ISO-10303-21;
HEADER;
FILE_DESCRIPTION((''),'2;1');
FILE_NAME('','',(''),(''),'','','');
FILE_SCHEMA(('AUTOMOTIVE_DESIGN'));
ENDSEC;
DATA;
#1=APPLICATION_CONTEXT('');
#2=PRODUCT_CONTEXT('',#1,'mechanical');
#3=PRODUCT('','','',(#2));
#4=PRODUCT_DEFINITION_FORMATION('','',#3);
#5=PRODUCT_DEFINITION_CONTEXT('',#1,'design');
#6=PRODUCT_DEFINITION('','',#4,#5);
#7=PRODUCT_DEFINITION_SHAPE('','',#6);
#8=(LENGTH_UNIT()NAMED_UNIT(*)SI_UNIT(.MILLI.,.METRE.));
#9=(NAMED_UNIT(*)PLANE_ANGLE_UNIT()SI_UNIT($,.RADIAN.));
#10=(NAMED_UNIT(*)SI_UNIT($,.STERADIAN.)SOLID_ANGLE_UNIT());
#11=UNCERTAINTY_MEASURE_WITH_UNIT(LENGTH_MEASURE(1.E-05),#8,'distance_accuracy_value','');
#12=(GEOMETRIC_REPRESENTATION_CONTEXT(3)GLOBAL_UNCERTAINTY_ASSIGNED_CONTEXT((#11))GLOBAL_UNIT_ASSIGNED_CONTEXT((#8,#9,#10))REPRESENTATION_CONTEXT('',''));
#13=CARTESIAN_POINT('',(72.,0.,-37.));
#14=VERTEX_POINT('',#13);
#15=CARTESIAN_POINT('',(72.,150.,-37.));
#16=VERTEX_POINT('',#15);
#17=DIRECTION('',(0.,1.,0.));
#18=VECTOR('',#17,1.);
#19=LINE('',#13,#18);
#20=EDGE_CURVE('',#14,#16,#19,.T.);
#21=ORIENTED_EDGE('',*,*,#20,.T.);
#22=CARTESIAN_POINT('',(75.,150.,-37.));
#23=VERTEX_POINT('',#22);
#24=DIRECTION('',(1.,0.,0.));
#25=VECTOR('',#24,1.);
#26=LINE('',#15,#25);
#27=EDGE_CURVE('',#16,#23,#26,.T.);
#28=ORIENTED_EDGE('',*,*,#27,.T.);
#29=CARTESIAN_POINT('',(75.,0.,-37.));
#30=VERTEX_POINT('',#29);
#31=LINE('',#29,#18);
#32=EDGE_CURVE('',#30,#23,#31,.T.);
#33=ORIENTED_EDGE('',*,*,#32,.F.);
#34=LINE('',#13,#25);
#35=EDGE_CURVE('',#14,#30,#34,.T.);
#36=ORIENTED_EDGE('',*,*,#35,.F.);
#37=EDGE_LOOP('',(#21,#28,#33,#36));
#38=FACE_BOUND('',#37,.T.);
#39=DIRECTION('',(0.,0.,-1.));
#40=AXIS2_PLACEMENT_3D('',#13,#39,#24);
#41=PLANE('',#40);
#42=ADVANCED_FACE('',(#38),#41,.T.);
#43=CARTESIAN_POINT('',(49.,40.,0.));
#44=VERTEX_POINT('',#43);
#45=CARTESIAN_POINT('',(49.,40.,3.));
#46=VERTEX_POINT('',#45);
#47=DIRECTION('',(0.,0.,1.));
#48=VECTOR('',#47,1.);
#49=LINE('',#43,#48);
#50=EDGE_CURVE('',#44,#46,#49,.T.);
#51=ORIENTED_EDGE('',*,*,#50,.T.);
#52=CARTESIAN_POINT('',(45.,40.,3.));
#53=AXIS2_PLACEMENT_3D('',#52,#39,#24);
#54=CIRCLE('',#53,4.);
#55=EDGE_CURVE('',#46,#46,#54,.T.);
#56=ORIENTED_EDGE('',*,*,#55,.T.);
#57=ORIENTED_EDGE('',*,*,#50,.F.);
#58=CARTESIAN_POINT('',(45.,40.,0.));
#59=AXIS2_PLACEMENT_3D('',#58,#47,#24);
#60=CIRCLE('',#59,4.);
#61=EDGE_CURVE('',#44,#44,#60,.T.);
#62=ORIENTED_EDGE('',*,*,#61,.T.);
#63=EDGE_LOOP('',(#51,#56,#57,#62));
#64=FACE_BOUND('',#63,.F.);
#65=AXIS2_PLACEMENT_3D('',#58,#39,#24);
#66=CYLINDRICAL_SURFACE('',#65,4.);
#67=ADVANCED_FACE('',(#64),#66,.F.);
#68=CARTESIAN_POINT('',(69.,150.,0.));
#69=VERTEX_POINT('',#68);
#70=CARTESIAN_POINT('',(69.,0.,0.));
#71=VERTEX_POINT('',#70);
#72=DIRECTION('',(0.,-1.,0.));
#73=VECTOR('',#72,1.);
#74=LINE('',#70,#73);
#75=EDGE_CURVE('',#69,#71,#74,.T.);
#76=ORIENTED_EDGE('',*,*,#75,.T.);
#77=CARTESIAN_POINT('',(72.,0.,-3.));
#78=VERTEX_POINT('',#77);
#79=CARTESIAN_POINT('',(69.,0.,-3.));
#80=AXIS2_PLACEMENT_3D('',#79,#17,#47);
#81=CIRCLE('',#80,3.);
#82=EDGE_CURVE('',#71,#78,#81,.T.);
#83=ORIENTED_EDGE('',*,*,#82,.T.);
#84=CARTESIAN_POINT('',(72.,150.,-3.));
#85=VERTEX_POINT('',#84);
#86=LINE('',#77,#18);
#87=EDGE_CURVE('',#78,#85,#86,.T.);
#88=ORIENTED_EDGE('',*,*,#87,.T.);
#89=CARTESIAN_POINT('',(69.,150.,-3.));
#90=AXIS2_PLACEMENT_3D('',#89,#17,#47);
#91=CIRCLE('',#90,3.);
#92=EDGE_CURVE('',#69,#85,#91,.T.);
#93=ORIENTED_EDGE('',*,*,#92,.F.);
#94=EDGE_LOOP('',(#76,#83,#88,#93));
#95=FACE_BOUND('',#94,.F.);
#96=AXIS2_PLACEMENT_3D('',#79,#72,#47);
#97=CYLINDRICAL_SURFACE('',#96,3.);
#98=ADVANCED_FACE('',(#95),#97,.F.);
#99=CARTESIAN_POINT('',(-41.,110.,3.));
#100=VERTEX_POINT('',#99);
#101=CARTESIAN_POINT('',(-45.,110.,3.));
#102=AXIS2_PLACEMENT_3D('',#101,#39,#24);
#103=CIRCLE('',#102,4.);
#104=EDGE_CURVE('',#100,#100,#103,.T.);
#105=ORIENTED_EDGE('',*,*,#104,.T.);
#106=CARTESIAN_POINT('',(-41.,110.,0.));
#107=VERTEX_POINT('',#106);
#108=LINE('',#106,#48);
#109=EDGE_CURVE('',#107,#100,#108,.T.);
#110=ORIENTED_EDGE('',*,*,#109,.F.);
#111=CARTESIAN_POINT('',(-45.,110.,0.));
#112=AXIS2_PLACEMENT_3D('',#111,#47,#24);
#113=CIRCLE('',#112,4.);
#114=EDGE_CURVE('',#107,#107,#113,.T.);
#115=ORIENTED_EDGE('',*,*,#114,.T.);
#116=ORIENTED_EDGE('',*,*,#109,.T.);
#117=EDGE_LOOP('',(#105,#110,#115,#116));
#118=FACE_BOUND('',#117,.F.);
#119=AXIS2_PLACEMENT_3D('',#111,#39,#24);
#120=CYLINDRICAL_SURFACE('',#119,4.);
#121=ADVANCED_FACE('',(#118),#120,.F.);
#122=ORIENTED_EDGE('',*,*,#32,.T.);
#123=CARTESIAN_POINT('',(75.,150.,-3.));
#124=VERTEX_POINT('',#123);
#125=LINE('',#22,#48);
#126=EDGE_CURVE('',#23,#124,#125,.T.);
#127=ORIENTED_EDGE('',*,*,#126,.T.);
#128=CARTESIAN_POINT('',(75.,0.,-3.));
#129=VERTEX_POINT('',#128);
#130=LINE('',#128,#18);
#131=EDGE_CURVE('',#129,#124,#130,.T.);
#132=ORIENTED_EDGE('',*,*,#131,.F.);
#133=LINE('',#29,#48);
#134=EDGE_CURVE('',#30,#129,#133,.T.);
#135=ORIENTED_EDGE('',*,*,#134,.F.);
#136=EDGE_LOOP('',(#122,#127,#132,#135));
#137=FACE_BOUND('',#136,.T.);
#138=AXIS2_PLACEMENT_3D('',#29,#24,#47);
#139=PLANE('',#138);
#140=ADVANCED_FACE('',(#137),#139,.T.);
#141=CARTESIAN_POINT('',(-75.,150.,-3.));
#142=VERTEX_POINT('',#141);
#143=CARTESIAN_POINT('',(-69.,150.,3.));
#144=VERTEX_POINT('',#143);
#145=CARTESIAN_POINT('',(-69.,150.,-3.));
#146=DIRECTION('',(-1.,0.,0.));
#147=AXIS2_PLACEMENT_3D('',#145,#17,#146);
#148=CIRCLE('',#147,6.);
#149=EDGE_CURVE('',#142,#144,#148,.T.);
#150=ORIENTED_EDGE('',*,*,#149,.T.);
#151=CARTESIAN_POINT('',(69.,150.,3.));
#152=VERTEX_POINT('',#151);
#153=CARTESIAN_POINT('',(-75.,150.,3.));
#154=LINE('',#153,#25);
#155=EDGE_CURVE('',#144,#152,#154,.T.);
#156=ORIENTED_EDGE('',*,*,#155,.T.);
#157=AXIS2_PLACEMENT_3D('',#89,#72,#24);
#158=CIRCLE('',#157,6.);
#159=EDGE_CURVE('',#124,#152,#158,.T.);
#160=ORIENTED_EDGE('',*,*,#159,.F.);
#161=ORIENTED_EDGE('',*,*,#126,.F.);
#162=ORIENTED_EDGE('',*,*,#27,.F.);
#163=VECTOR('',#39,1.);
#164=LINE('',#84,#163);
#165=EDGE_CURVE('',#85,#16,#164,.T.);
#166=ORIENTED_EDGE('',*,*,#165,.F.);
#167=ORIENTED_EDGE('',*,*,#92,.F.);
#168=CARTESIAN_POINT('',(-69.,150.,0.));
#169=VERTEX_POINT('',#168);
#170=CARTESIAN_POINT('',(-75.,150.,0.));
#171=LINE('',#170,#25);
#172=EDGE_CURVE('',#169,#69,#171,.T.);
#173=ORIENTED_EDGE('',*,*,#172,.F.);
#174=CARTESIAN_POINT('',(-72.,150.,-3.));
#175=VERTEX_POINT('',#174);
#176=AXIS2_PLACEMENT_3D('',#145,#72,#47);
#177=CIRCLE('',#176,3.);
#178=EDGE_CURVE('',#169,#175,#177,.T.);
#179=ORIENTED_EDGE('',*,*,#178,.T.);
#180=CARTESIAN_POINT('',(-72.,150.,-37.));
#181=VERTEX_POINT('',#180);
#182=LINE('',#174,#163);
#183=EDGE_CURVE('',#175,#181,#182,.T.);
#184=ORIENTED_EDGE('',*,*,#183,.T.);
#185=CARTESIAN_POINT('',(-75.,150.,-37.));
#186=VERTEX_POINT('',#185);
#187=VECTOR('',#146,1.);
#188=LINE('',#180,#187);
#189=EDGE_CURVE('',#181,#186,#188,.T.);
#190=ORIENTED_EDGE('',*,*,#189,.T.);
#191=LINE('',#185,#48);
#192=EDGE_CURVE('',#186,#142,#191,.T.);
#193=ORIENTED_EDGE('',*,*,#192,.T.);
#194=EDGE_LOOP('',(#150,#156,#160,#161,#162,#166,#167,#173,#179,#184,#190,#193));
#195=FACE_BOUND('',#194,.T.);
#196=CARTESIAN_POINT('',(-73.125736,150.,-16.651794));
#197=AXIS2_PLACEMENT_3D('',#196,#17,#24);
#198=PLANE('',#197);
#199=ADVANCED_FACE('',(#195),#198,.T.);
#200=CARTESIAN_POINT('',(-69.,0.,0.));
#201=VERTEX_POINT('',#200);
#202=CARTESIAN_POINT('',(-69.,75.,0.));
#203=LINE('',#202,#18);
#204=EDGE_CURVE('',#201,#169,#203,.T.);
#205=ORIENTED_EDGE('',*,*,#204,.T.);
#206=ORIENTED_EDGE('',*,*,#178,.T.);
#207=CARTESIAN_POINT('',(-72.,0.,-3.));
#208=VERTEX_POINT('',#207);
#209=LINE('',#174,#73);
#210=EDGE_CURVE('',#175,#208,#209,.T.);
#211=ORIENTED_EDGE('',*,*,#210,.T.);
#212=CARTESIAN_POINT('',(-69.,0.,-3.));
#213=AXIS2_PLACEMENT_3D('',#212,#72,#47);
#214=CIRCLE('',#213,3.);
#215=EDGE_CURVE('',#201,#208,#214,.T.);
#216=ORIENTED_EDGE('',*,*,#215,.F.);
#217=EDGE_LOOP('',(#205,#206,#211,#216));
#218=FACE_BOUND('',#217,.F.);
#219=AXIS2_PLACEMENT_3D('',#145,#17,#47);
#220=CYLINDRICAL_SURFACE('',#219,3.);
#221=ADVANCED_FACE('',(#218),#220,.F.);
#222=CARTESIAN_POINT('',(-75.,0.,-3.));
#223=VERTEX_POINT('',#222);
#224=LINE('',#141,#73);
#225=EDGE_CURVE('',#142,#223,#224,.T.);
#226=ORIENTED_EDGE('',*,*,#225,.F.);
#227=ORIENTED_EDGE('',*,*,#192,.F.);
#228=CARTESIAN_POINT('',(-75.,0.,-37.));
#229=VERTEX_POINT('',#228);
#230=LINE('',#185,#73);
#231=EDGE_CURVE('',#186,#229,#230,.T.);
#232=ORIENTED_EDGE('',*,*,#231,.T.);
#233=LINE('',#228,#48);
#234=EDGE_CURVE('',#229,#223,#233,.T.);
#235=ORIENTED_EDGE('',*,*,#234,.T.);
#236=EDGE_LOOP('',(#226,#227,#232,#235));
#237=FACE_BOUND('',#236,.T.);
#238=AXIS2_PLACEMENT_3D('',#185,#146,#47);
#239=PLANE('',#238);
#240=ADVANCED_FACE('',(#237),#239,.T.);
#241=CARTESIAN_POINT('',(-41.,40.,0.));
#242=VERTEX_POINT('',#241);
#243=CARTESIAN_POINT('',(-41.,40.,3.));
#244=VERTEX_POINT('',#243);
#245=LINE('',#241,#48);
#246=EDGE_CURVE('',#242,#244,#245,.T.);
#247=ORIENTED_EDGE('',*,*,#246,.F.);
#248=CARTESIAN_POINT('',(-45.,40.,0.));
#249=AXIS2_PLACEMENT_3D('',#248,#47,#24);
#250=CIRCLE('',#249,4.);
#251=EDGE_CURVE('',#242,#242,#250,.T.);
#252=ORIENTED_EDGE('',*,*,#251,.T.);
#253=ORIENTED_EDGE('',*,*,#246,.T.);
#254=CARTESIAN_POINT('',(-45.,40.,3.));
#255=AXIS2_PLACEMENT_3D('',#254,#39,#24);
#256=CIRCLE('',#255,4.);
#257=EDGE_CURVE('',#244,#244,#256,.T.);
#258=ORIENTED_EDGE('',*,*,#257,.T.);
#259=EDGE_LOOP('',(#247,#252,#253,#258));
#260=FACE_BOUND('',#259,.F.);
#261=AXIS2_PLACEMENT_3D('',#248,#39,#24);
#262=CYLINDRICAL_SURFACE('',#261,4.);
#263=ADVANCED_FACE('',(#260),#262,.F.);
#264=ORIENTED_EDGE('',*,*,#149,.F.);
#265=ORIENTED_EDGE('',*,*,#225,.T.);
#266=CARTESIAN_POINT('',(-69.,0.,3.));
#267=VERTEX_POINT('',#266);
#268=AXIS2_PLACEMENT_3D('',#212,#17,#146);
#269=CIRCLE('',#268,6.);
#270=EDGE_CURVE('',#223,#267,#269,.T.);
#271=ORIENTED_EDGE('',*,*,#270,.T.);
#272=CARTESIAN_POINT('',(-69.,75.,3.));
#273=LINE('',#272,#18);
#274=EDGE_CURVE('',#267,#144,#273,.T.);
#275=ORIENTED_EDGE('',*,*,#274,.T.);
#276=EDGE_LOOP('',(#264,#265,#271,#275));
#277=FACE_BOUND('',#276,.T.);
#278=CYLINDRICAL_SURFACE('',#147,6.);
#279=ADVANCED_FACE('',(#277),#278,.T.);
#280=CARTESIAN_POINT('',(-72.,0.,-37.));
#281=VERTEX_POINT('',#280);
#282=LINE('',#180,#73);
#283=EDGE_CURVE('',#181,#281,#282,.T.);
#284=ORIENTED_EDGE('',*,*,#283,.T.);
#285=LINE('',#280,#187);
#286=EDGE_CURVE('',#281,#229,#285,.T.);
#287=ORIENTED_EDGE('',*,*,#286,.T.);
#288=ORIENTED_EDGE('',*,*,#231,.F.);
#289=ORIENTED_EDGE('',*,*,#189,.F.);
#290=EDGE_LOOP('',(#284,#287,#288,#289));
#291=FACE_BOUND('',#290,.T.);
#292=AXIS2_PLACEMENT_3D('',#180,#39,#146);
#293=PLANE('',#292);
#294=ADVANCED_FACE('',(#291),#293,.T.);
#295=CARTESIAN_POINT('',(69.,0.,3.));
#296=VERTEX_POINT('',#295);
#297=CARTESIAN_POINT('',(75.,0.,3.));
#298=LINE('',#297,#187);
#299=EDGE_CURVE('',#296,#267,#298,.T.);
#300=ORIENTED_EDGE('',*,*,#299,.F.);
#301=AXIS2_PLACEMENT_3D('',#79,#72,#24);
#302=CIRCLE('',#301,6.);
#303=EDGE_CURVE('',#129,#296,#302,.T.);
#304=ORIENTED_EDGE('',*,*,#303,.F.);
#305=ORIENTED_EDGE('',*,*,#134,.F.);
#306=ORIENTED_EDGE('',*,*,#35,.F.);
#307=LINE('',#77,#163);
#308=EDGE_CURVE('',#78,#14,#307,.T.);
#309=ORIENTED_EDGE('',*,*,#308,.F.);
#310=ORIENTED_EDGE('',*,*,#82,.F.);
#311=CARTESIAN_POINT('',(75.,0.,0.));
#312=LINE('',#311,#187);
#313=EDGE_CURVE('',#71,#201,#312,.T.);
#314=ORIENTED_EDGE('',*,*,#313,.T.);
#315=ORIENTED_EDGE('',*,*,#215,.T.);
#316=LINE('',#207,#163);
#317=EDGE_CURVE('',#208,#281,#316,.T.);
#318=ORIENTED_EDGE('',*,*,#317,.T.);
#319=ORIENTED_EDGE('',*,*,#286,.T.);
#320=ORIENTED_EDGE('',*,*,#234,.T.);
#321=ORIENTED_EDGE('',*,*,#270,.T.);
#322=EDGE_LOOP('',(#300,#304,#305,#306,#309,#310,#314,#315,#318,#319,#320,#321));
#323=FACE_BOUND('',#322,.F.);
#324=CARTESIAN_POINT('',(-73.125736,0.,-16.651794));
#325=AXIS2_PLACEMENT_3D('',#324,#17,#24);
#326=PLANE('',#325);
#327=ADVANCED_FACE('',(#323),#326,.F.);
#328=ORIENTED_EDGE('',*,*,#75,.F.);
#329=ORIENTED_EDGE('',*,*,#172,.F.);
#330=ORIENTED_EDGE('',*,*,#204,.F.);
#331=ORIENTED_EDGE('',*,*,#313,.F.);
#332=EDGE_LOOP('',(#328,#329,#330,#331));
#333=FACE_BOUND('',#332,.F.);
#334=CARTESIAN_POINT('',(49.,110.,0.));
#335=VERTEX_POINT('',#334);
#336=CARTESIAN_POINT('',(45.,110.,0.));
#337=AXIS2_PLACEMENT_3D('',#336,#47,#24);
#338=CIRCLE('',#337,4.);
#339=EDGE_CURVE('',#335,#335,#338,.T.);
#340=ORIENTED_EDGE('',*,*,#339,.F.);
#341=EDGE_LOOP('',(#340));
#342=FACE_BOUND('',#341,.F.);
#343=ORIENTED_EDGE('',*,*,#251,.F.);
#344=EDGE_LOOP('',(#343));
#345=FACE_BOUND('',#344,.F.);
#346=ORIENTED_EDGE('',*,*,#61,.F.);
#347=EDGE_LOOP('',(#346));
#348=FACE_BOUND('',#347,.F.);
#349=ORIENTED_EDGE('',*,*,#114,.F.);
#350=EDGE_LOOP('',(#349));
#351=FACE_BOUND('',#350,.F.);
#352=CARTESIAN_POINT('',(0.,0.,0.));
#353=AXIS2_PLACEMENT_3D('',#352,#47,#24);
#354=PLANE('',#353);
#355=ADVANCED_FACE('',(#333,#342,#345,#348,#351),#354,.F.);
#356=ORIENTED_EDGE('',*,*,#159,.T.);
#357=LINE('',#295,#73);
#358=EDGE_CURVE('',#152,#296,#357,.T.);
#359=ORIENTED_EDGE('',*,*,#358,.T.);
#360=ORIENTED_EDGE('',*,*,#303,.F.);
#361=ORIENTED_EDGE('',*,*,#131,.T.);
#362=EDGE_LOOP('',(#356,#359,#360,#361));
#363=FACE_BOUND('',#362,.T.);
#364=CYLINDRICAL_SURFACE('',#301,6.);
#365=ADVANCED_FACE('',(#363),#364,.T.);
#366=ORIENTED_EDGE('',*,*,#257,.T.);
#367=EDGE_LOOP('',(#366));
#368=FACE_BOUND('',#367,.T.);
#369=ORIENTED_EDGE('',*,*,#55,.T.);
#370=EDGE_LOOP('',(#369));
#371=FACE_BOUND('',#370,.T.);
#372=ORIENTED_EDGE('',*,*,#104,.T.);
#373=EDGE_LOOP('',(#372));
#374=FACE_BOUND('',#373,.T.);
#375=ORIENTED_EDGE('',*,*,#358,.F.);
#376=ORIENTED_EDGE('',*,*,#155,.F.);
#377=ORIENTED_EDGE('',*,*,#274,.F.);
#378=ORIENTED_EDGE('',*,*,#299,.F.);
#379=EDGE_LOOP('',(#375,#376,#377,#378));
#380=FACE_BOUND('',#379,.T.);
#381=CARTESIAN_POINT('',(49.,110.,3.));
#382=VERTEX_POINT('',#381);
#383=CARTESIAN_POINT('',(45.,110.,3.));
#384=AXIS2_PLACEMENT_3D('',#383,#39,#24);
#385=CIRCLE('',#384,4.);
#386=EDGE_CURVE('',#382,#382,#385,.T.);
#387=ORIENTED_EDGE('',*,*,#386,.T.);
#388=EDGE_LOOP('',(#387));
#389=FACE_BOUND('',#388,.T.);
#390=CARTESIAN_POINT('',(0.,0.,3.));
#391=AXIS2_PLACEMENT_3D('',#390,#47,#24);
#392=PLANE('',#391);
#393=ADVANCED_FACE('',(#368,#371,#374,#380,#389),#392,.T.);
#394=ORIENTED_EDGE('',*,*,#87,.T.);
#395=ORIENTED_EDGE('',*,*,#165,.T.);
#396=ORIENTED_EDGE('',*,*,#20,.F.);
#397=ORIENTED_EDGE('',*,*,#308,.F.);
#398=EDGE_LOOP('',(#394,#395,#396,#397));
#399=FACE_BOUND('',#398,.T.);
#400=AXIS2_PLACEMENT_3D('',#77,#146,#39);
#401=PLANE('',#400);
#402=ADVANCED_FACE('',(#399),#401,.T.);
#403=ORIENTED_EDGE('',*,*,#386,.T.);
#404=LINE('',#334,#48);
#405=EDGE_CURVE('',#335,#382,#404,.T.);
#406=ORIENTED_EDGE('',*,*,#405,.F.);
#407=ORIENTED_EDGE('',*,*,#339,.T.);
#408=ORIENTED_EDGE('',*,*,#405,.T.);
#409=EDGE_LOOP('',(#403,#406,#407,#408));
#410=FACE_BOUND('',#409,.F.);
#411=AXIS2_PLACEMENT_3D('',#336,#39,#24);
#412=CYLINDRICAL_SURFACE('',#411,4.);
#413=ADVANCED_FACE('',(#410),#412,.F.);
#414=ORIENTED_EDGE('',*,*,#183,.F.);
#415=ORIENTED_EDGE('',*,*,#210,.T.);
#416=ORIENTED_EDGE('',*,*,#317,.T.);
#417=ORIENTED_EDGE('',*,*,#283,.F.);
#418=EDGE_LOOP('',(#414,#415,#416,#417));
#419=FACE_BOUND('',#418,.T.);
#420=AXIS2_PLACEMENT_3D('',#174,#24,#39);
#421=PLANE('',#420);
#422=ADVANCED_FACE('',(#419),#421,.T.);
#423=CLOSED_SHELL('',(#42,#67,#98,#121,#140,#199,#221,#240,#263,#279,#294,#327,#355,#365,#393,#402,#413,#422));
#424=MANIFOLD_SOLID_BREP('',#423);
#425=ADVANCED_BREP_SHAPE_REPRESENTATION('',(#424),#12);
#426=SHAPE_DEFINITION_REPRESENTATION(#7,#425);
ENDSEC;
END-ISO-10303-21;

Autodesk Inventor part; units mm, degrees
ref_plane "YZ Plane" through (0, 0, 0) normal (1, 0, 0) x (0, 1, 0)
ref_plane "XZ Plane" through (0, 0, 0) normal (0, 1, 0) x (-1, 0, 0)
ref_plane "XY Plane" through (0, 0, 0) normal (0, 0, 1) x (1, 0, 0)
sketch "Sketch1" plane through (0, 0, 0) normal (0, 0, 1) x (1, 0, 0)
  line L0 (75, 0) -> (-75, 0)
  line L1 (-75, 0) -> (-75, 150)
  line L2 (-75, 150) -> (75, 150)
  line L3 (75, 150) -> (75, 0)
  point P0 (0, 0)
  point P1 (0, 0)
  dimension "d1" = 150
  dimension "d2" = 150
extrude "Plate1" add sketch "Sketch1" along normal blind 3
sketch "Sketch2" plane through (0, 0, 0) normal (0, 0, 1) x (1, 0, 0)
  line L0 (-75, 0) -> (-75, 150) projected
  line L1 (75, 0) -> (-75, 0) projected
  line L2 (75, 150) -> (75, 0) projected
  line L3 (-75, 150) -> (75, 150) projected
  circle A0 centre (0, 75) radius 17.5
  line L4 (45, 40) -> (-45, 40) construction
  line L5 (-45, 40) -> (-45, 110) construction
  line L6 (-45, 110) -> (45, 110) construction
  line L7 (45, 110) -> (45, 40) construction
  line L8 (45, 40) -> (-45, 110) construction
  line L9 (-45, 40) -> (45, 110) construction
  circle A1 centre (-45, 40) radius 4
  circle A2 centre (45, 40) radius 4
  circle A3 centre (45, 110) radius 4
  circle A4 centre (-45, 110) radius 4
  point P0 (0, 0)
  point P1 (0, 0)
  point P2 (75, 75)
  dimension "d3" = 35
  dimension "d4" = 90
  dimension "d5" = 70
  dimension "d7" = 8
extrude "Extrusion1" cut sketch "Sketch2" along normal through all contours A1 | A2 | A3 | A4
sketch "Sketch3" plane through (-72, 150, 3) normal (-1, 0, 0) x (0, -1, 0)
  line L0 (150, 0) -> (0, 0)
  line L1 (0, 0) -> (0, -40)
  line L2 (0, -40) -> (150, -40)
  line L3 (150, -40) -> (150, 0)
edge flange "Flange1" height 40 angle 90 thickness 3 bend radius 3 thickness toward (-1, 0, 0) relief tear relief width 3 relief depth 1.5 corner gap 3 corner form 0 edges at (-75, 75, 0) (75, 75, 0) wall of the first edge with corners at (-72, 0, 3) (-72, 150, 3) (-72, 150, -37) (-72, 0, -37)
bend "Bend1"
corner "Corner1"
sketch "Sketch4" plane through (0, 0, 0) normal (0, 0, 1) x (1, 0, 0)
  circle A0 centre (0, 75) radius 17.5 projected
  line L0 (0, 125) -> (0, 105) construction
  line L1 (-3, 125) -> (-3, 105)
  line L2 (3, 105) -> (3, 125)
  arc A1 (3, 125) -> (-3, 125) centre (0, 125) ccw
  arc A2 (-3, 105) -> (3, 105) centre (0, 105) ccw
  arc A3 (34.641, 95) -> (20, 109.641) centre (0, 75) ccw construction
  arc A4 (37.2391, 96.5) -> (21.5, 112.2391) centre (0, 75) ccw
  arc A5 (32.0429, 93.5) -> (18.5, 107.0429) centre (0, 75) ccw
  arc A6 (32.0429, 93.5) -> (37.2391, 96.5) centre (34.641, 95) ccw
  arc A7 (21.5, 112.2391) -> (18.5, 107.0429) centre (20, 109.641) ccw
  line L3 (0, 75) -> (20, 109.641) construction
  line L4 (0, 75) -> (40, 75) construction
  line L5 (0, 75) -> (34.641, 95) construction
  point P0 (0, 0)
  point P1 (0, 115)
  dimension "d20" = 20
  dimension "d21" = 6
  dimension "d22" = 30
  dimension "d23" = 60
  dimension "d24" = 30
  dimension "d25" = 6
  dimension "d26" = 40
extrude "Extrusion2" [suppressed]
pattern_circular "Circular Pattern1" [suppressed]
equation "\"d1\" = d2"
equation "\"d0\" = Thickness"
equation "\"d10\" = BendReliefWidth"
equation "\"d11\" = BendReliefDepth"
equation "\"d12\" = MinimumRemnant"
equation "\"d13\" = TransitionRadius"
equation "\"d16\" = BendRadius"
equation "\"d17\" = CornerReliefSize"
equation "\"d18\" = GapSize"
equation "\"d19\" = JacobiRadiusSize"
equation "\"BendRadius\" = Thickness"
equation "\"BendReliefWidth\" = Thickness"
equation "\"BendReliefDepth\" = 0.5 * Thickness"
equation "\"CornerReliefSize\" = 4 * Thickness"
equation "\"MinimumRemnant\" = 2 * Thickness"
equation "\"TransitionRadius\" = BendRadius"
equation "\"JacobiRadiusSize\" = BendRadius"
equation "\"GapSize\" = Thickness"
equation "\"Thickness\" = 3"
properties part number "FL3.6.2  Motor pillar" material "Stainless Steel"
